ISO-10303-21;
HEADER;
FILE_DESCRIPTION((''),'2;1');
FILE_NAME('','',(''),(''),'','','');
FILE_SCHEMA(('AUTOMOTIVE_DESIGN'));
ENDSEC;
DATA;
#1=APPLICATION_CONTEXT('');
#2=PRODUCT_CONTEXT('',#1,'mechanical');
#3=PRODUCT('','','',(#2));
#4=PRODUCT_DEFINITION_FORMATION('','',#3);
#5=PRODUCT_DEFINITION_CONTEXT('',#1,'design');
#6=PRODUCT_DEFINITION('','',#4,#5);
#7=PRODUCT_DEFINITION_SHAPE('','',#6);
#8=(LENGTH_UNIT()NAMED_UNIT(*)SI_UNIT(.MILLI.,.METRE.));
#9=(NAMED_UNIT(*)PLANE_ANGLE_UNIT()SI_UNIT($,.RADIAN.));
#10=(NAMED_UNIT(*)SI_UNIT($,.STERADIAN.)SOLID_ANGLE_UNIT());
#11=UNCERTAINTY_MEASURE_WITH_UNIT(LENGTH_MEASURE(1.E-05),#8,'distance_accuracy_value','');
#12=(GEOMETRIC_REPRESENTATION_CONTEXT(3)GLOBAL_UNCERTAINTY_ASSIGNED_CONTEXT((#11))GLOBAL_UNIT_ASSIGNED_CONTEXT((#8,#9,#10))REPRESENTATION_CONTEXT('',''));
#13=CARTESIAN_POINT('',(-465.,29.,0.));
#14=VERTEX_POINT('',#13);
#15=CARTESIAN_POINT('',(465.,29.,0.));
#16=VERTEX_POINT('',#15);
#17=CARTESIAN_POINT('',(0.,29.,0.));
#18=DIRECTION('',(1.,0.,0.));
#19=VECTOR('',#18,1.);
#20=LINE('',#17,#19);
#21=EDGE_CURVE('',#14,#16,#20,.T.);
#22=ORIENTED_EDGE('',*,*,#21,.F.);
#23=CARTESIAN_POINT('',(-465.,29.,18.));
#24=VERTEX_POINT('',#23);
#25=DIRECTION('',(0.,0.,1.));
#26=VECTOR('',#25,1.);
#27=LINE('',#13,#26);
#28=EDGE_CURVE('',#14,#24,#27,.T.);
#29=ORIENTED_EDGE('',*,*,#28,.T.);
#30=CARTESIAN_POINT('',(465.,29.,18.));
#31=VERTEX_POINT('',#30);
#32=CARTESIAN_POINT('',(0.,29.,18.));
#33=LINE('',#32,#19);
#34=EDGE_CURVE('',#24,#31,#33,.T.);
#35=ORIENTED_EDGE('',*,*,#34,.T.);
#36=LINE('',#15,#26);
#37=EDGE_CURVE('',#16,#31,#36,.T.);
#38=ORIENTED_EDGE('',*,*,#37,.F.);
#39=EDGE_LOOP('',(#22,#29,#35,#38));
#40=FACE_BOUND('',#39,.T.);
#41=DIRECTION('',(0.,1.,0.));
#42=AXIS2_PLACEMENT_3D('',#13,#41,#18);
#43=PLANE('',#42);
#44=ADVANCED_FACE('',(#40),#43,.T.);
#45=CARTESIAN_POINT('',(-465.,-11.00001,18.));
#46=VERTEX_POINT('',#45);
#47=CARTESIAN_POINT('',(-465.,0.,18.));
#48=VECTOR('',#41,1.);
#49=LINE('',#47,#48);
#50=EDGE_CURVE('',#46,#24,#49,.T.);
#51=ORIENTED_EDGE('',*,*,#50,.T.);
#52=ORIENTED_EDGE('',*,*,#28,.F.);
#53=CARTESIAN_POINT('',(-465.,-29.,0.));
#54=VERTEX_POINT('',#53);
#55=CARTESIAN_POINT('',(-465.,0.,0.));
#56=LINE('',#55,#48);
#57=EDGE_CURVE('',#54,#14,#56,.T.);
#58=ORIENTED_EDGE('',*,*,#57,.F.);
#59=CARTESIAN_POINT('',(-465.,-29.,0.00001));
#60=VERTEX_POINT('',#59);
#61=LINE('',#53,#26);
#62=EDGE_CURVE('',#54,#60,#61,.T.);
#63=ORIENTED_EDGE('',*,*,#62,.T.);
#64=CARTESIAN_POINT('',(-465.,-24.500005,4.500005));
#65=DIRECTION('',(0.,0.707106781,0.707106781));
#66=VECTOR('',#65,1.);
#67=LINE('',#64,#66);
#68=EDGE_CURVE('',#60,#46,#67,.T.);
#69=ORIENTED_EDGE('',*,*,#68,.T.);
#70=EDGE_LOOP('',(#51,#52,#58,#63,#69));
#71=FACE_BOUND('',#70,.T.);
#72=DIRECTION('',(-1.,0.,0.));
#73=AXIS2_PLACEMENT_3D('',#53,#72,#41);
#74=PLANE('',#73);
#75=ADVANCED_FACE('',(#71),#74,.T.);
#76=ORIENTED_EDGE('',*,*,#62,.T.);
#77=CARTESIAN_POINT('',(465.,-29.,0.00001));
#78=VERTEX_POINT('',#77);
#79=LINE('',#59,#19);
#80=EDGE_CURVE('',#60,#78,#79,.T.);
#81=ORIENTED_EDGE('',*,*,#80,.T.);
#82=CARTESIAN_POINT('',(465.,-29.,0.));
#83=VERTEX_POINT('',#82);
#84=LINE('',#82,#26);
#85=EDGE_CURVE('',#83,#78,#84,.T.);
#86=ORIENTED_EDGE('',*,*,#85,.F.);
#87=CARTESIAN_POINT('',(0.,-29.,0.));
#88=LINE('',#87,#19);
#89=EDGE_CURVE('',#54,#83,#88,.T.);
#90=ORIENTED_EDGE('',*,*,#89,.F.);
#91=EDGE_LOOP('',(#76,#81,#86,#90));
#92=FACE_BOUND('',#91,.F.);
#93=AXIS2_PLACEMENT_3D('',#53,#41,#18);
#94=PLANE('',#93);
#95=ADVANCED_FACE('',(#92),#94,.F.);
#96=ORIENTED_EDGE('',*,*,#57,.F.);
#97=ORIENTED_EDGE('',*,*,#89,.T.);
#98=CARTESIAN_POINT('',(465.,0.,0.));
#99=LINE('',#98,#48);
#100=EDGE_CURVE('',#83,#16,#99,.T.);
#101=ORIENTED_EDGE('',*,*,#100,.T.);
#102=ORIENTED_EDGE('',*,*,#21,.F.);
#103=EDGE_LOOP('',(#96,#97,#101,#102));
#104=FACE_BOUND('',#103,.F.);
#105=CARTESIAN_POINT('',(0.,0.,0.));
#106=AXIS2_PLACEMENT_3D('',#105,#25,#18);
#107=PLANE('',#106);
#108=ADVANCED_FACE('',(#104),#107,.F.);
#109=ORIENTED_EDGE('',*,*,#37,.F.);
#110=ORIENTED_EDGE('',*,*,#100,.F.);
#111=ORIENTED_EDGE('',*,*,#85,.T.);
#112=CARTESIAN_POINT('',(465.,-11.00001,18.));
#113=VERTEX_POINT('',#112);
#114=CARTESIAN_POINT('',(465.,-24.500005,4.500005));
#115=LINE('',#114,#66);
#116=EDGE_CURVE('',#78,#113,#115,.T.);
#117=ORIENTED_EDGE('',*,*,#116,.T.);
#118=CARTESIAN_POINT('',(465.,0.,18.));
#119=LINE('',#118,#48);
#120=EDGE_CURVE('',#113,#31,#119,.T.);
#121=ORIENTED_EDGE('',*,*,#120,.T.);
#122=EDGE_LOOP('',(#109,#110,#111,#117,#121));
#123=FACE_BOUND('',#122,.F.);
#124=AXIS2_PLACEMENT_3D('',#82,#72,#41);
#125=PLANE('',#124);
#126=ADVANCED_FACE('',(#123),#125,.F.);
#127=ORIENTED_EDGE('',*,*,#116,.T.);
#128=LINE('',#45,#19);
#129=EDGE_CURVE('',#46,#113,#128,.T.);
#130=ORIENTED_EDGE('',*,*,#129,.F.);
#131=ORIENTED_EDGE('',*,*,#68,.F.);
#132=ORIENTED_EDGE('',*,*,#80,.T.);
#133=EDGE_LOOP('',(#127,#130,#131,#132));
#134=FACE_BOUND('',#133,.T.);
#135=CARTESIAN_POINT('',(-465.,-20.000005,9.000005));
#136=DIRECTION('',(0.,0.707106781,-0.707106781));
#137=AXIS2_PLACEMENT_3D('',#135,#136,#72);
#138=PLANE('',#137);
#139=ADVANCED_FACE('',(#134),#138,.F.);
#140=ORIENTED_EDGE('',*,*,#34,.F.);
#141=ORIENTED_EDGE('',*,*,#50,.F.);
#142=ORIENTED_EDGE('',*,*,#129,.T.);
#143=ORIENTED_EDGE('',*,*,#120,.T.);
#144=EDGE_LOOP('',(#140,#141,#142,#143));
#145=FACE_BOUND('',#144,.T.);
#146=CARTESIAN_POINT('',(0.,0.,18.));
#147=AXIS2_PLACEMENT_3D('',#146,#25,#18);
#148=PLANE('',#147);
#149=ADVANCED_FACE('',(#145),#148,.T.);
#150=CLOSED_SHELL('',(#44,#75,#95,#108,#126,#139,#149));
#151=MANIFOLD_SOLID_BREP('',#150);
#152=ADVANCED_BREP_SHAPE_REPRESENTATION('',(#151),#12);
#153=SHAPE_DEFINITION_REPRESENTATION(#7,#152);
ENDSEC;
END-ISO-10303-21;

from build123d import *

# Parameters (mm, degrees)
F0_W     = 930
F0_H     = 58
F1_DEPTH = 18
F2_SIZE  = 17.99999


# Not quite as in the source:
# - a fillet or chamfer is up to 0.001 mm smaller than in the source, because OpenCascade refuses the exact size


with BuildPart() as f1:
    # F0 (on Top) → F1 (new body)
    with BuildSketch(Plane.XY):
        Rectangle(F0_W, F0_H)
    extrude(amount=F1_DEPTH)

    # F2 (size 18 in the source; OpenCascade refuses exactly that, so slightly less here)
    f2_edges = [f1.edges().sort_by_distance(p)[0] for p in [
        (0, -29, 18),
    ]]
    chamfer(f2_edges, length=F2_SIZE)


solid = f1.part
